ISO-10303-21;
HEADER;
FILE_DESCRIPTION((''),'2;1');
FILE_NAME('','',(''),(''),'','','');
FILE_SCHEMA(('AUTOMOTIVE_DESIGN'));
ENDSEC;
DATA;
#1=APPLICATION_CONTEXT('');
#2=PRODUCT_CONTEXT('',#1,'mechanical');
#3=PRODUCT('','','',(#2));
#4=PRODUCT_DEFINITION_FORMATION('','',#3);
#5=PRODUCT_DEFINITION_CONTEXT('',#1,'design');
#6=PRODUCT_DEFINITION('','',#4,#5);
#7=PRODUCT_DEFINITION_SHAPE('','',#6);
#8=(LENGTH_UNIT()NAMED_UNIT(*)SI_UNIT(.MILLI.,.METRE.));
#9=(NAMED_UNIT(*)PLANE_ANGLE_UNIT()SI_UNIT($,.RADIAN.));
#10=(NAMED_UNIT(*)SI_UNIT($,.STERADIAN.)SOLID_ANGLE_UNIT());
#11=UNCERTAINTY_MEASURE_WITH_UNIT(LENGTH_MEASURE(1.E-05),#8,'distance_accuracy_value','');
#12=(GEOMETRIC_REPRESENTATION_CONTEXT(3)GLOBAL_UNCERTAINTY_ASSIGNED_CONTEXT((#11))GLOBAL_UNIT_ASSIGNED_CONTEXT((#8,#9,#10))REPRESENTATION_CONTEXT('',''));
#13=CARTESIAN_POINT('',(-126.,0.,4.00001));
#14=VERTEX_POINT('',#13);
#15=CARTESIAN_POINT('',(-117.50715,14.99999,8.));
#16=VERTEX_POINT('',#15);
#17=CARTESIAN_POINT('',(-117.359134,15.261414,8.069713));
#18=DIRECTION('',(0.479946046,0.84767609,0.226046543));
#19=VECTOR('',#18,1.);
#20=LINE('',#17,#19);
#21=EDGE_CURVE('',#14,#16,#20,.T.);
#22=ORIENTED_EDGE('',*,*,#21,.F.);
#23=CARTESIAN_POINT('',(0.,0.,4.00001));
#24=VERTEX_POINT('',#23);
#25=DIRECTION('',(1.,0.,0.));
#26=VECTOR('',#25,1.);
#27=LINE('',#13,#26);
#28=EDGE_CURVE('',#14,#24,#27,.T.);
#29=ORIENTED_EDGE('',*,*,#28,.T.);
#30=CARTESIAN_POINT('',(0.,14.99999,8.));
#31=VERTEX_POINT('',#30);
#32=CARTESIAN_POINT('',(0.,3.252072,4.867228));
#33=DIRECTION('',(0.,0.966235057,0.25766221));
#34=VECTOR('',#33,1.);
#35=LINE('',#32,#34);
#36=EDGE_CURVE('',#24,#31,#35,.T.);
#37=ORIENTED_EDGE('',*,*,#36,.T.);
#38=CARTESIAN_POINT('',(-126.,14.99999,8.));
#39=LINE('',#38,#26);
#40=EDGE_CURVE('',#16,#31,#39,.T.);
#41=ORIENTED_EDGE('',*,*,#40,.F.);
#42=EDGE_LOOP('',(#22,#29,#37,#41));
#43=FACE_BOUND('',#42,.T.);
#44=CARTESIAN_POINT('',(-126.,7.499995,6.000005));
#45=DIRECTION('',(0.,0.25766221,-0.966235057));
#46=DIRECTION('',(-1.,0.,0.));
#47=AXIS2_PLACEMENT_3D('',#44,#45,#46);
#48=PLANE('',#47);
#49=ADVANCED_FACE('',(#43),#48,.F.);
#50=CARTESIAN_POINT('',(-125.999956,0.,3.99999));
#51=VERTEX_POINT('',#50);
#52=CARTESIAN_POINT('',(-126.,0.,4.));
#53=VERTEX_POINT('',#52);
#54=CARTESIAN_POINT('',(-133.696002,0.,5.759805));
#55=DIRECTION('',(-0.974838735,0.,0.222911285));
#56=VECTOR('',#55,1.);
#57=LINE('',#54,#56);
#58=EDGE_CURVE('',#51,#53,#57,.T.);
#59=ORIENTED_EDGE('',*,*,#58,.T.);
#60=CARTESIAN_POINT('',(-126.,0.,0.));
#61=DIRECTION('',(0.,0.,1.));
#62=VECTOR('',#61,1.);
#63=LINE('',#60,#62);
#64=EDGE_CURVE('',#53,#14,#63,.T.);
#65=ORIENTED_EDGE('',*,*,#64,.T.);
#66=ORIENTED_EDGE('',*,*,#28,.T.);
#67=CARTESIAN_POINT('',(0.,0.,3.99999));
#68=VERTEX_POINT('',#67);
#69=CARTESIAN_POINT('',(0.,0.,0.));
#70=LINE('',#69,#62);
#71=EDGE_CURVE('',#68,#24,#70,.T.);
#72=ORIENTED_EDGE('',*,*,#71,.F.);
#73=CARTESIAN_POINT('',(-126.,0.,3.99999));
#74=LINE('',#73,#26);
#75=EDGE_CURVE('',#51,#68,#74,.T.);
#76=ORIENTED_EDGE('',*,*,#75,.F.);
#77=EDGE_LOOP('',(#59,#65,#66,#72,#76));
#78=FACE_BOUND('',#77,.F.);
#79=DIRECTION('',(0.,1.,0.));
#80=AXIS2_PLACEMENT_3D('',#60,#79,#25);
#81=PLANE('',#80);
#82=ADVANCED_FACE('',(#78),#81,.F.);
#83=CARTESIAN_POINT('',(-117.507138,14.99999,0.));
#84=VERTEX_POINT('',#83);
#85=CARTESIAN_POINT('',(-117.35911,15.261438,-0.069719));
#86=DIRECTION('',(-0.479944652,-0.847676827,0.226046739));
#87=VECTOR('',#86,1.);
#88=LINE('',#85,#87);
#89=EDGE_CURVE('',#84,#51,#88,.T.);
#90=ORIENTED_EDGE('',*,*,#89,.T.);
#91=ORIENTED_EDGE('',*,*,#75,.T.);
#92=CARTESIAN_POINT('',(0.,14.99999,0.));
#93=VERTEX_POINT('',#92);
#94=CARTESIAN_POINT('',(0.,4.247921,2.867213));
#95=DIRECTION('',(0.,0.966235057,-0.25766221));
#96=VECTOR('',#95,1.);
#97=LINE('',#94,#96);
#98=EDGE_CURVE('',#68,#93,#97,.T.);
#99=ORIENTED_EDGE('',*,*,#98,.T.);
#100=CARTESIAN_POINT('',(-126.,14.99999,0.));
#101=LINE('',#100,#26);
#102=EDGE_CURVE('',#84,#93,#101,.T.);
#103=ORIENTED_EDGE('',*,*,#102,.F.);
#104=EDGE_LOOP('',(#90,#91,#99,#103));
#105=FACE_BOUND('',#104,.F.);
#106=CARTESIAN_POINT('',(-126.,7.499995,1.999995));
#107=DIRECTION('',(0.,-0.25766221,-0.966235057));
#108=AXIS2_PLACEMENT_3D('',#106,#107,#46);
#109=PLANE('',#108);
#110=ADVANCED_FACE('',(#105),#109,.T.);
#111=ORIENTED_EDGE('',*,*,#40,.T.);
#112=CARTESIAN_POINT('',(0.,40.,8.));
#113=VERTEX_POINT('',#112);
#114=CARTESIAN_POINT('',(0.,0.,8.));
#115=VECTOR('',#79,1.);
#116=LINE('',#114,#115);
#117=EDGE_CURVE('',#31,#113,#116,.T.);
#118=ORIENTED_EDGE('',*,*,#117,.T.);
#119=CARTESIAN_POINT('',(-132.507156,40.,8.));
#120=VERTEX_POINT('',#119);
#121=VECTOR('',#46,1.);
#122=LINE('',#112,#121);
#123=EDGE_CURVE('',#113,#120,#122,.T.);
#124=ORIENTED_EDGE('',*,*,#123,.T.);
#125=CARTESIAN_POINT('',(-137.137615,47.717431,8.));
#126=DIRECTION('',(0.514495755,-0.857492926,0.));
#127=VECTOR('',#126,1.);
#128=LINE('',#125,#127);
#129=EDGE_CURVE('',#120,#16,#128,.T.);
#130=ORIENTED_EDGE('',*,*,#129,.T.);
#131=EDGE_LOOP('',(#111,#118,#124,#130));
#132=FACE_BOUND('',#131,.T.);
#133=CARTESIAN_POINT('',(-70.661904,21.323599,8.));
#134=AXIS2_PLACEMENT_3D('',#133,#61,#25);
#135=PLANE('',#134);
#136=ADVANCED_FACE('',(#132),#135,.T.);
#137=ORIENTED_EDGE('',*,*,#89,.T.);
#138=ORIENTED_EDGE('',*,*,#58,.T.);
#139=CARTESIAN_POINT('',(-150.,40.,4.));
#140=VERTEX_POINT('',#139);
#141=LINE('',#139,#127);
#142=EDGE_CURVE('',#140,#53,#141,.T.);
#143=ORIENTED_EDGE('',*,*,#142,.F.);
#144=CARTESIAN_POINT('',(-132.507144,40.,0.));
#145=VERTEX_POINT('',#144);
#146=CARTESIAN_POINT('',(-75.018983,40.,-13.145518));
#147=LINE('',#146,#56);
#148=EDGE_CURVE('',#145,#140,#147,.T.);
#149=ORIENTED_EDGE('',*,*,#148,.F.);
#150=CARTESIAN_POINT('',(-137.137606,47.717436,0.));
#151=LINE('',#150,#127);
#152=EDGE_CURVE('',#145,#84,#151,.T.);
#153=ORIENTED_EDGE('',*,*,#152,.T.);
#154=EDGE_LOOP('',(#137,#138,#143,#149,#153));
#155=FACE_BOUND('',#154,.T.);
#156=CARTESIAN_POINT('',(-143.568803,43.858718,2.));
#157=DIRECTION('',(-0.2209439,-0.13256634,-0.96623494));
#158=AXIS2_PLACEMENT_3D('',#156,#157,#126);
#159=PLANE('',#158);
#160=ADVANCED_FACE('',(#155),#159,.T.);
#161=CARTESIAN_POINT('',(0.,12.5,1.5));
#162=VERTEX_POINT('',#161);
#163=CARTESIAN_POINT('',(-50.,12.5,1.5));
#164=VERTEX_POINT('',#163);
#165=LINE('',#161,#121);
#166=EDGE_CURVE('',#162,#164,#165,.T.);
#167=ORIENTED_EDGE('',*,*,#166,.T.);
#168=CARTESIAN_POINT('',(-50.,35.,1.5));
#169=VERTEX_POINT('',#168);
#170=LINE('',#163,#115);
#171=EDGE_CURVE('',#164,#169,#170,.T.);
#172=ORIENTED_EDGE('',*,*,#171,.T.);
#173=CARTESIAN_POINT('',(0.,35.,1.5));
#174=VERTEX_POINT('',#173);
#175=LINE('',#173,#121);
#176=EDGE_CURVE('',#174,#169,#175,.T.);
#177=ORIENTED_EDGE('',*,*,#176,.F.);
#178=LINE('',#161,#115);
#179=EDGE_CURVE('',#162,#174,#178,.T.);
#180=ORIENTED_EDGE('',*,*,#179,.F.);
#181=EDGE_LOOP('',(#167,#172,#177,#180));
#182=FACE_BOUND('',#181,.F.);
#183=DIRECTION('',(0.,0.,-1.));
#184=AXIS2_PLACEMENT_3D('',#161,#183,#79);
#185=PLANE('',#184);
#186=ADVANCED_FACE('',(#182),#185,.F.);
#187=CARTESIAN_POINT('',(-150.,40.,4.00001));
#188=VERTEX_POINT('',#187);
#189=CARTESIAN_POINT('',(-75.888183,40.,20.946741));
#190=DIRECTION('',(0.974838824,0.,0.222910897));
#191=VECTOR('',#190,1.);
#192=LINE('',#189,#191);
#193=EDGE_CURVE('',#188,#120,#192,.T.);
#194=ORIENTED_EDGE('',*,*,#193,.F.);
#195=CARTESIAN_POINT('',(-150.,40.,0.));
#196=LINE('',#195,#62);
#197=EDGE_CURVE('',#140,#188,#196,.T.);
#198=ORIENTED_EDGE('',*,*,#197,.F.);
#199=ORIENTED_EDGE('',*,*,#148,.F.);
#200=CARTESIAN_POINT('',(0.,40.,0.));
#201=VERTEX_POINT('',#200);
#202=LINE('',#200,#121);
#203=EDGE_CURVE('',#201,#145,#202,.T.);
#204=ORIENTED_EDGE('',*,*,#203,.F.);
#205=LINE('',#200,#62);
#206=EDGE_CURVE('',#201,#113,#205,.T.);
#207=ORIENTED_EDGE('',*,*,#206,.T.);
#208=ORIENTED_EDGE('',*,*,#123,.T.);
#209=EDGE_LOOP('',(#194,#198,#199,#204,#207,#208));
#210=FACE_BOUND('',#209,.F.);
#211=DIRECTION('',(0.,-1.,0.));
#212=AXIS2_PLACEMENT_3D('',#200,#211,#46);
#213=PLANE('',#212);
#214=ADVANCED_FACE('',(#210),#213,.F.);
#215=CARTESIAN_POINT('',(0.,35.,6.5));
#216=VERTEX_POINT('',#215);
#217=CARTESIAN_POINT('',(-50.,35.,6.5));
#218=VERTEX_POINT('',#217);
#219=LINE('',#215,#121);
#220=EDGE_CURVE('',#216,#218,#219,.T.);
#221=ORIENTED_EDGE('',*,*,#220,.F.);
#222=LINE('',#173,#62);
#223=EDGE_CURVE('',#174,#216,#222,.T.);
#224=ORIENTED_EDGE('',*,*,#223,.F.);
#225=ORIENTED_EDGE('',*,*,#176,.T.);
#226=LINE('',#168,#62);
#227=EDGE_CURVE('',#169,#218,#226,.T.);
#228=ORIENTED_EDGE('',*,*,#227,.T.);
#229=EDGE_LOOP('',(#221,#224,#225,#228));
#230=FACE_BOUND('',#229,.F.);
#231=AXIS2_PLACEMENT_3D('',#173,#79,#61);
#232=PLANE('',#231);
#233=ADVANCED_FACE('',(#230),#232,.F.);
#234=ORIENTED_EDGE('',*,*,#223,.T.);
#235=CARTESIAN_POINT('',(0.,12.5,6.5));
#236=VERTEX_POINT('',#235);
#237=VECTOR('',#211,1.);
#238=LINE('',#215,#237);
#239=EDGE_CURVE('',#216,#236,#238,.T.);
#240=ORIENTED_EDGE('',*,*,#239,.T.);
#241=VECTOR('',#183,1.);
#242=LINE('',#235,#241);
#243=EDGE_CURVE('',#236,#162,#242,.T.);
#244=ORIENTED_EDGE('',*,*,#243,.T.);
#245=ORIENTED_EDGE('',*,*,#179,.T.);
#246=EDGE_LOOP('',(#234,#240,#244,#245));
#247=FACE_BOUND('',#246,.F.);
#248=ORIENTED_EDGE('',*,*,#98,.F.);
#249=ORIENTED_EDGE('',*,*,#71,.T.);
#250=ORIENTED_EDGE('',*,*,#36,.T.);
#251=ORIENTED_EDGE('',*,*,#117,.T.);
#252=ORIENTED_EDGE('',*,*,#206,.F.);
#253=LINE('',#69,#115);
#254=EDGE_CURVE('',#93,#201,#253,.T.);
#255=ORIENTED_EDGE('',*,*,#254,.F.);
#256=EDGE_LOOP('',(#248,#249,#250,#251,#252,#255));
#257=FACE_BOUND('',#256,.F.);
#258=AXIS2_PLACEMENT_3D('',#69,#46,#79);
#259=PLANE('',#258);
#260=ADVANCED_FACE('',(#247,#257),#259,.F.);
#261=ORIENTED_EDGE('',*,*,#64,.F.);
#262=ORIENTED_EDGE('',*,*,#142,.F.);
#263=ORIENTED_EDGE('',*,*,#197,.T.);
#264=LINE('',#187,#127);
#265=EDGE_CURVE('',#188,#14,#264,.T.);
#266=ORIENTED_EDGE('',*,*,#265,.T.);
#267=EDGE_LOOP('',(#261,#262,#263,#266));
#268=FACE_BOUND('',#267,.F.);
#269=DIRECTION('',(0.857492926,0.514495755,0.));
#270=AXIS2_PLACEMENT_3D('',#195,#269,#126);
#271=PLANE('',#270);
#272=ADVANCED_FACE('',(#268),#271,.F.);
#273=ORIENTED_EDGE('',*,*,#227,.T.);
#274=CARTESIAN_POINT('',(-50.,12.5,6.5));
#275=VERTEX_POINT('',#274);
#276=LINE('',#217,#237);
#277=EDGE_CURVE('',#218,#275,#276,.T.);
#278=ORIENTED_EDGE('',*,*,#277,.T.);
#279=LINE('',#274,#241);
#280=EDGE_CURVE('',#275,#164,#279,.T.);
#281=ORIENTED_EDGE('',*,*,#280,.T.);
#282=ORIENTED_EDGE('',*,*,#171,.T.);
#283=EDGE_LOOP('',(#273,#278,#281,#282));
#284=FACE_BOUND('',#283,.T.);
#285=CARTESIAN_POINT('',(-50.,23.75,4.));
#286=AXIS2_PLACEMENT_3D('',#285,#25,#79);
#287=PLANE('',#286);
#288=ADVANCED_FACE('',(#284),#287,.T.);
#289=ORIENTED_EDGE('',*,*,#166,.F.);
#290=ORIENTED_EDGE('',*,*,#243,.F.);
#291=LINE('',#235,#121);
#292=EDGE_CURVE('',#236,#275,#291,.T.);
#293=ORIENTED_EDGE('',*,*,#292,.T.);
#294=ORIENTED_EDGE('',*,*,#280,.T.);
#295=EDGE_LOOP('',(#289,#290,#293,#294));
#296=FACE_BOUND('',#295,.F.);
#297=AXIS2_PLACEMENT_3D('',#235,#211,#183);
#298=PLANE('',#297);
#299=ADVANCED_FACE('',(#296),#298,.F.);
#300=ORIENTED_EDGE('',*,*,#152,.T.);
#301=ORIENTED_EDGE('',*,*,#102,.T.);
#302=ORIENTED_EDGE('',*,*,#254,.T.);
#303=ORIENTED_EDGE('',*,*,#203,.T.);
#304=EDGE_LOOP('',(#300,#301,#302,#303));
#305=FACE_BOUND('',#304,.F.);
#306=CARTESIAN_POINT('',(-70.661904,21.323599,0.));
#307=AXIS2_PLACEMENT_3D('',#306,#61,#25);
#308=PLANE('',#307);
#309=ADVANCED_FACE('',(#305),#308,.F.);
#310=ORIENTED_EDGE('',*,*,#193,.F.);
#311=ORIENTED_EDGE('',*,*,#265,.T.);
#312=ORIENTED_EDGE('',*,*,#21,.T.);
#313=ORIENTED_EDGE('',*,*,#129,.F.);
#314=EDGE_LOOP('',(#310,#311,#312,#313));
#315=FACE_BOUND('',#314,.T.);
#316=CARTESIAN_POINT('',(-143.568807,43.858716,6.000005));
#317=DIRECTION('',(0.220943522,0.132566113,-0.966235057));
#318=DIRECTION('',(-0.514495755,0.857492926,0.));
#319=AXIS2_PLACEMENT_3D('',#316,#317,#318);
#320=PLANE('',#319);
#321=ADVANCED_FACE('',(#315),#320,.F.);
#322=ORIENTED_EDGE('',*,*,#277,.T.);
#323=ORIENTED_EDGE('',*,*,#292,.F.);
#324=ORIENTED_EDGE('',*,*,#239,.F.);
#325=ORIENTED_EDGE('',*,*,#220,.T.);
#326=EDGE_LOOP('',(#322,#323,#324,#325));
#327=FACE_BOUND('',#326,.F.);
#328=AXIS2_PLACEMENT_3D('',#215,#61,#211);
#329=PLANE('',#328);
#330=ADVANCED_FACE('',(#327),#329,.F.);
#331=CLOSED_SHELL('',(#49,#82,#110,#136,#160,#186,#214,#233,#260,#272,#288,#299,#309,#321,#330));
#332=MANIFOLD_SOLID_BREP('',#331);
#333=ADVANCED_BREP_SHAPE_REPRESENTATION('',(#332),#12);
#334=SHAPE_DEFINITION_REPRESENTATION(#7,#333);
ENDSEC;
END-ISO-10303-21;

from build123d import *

# Parameters (mm, degrees)
F1_DEPTH = 8
F2_SIZE2 = 14.99999
F2_SIZE  = 3.99999
F3_SIZE2 = 4
F3_SIZE  = 15
F5_DEPTH = 50


# Not quite as in the source:
# - a fillet or chamfer is up to 0.001 mm smaller than in the source, because OpenCascade refuses the exact size


with BuildPart() as f1:
    # F0 (on Top) → F1 (new body)
    with BuildSketch(Plane.XY):
        Polygon((-126, 0), (0, 0), (0, 40), (-150, 40), align=None)
    extrude(amount=F1_DEPTH)

    # F2 (size 4 and 15 in the source; OpenCascade refuses exactly that, so slightly less here)
    f2_edges = [f1.edges().sort_by_distance(p)[0] for p in [
        (-63, 0, 8),
        (-138, 20, 8),
        (-63, 0, 0),
    ]]
    chamfer(f2_edges, length=F2_SIZE, length2=F2_SIZE2)

    # F3
    f3_edges = [f1.edges().sort_by_distance(p)[0] for p in [
        (-142.499997, 27.499995, 0),
    ]]
    f3_side = f1.faces().sort_by_distance((-71.315788, 27.719293, 0))[0]
    chamfer(f3_edges, length=F3_SIZE, length2=F3_SIZE2, reference=f3_side)

    # F4 (on face) → F5 (cut)
    with BuildSketch(Plane.YZ):
        Polygon((12.5, 6.5), (12.5, 4), (12.5, 1.5), (35, 1.5), (35, 6.5), align=None)
    extrude(amount=-F5_DEPTH, mode=Mode.SUBTRACT)


solid = f1.part
